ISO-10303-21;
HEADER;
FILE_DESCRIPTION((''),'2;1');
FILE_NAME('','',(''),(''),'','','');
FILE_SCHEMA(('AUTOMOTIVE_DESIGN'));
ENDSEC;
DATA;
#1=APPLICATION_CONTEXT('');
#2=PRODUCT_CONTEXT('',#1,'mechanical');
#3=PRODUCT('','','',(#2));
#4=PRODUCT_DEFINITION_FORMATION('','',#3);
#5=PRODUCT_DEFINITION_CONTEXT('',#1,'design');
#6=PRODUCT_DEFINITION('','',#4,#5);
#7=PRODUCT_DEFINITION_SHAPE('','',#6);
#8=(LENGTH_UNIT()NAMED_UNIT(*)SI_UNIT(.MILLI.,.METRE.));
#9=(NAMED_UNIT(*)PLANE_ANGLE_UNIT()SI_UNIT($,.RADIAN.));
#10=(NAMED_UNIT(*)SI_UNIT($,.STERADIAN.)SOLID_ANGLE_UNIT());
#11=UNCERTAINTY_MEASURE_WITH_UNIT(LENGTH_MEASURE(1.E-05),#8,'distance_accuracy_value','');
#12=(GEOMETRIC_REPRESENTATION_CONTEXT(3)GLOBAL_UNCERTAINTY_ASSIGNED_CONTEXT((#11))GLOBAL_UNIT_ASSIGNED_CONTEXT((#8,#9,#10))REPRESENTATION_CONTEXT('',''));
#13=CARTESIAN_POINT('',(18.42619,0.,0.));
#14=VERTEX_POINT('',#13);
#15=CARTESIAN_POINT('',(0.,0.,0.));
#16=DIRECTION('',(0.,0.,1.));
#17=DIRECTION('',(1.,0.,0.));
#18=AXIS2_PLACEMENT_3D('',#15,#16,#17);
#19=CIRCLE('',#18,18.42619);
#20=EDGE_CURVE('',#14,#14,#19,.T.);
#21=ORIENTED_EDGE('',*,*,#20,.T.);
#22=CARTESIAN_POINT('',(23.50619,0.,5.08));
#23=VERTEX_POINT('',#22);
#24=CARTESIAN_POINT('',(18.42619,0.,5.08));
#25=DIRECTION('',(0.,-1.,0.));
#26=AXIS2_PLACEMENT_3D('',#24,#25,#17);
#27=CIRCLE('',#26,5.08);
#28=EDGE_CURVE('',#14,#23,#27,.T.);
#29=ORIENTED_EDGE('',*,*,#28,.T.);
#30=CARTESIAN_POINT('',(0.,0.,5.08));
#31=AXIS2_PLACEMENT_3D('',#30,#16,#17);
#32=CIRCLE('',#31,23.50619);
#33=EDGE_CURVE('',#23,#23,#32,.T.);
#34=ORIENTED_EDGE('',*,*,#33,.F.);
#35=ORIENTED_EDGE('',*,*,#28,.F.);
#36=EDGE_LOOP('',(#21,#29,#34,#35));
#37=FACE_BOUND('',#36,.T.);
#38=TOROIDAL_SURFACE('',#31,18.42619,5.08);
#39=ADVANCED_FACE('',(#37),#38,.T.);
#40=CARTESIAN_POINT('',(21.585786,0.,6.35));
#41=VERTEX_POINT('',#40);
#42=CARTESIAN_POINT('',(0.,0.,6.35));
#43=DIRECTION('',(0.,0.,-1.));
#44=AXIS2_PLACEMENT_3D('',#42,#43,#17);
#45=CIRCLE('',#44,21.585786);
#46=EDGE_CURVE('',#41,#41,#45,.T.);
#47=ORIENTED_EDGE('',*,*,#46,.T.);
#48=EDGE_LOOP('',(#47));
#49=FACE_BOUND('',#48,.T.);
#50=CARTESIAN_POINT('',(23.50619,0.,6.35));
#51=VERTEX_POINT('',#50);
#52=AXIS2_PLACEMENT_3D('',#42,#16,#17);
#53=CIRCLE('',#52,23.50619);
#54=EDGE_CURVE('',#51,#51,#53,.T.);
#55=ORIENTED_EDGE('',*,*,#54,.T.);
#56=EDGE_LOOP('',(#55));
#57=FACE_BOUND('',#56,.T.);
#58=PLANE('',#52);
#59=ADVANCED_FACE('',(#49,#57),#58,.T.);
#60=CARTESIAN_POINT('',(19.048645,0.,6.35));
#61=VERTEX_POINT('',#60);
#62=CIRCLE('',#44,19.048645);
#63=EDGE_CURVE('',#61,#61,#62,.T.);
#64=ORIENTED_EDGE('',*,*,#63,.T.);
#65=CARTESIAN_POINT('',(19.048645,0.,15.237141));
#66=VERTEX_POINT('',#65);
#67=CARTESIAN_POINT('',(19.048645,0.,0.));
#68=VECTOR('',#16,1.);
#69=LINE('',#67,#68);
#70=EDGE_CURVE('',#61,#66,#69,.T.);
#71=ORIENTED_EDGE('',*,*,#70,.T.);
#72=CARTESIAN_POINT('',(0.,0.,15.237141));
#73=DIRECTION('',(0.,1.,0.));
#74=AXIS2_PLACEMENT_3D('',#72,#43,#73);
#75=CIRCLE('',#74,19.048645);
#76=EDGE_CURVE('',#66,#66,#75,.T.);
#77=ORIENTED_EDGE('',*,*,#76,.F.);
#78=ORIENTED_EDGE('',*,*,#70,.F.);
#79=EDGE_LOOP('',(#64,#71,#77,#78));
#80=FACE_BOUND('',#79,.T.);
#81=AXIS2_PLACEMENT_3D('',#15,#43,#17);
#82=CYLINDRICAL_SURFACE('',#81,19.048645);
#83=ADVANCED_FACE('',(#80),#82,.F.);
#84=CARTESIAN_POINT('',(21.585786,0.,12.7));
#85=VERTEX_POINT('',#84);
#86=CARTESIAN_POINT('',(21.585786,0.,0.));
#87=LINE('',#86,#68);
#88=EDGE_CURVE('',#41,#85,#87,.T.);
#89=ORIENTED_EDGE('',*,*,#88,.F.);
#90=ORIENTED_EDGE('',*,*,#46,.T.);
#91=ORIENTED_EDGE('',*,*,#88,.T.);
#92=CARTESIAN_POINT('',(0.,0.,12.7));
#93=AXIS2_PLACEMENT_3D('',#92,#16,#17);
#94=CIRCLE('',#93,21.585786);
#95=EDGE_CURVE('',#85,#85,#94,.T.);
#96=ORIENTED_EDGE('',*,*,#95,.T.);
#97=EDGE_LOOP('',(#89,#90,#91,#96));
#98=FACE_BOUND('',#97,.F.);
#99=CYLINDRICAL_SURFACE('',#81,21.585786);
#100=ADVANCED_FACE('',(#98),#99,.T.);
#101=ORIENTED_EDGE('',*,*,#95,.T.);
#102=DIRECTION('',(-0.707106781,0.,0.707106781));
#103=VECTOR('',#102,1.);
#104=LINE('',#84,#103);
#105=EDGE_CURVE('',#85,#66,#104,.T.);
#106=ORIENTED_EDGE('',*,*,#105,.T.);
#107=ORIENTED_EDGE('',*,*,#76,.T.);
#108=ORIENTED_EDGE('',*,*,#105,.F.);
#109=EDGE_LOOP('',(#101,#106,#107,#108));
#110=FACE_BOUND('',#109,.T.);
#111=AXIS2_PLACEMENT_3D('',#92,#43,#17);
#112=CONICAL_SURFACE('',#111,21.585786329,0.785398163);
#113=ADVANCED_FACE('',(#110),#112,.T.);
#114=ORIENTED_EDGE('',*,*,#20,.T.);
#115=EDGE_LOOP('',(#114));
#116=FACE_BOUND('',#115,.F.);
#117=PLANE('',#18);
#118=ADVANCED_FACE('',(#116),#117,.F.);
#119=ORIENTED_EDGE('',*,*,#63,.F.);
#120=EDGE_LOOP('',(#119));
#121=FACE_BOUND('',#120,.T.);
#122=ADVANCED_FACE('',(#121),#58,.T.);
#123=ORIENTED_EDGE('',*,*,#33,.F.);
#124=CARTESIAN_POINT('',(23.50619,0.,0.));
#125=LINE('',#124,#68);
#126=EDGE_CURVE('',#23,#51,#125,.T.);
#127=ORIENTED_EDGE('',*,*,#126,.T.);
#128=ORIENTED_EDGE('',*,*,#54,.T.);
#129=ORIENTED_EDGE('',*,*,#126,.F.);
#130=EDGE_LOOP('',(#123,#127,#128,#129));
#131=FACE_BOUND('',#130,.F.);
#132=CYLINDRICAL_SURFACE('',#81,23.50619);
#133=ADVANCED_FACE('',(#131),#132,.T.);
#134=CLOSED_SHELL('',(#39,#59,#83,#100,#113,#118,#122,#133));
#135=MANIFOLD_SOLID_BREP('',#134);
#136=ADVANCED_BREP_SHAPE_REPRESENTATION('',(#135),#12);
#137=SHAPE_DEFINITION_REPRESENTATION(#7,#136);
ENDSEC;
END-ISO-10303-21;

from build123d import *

# Parameters (mm, degrees)
F0_R     = 23.5061904225
F1_DEPTH = 6.35
F2_R     = 21.5857863289
F2_R_2   = 19.0486454652
F3_DEPTH = 15.24
F4_R     = 5.08


# Not quite as in the source:
# - a fillet or chamfer that OpenCascade refuses, or shapes differently, is made with other operations: its cross-section is extruded or revolved along the edge and cut away or added


with BuildPart() as f1:
    # F0 (on Top) → F1 (new body)
    with BuildSketch(Plane.XY):
        Circle(F0_R)
    extrude(amount=F1_DEPTH)

    # F2 (on Top) → F3 (join)
    with BuildSketch(Plane.XY):
        Circle(F2_R)
        Circle(F2_R_2, mode=Mode.SUBTRACT)
    extrude(amount=F3_DEPTH)

    # F4
    f4_edges = [f1.edges().sort_by_distance(p)[0] for p in [
        (-23.50619, 0, 0),
    ]]
    fillet(f4_edges, radius=F4_R)

    # F5: chamfer of 2.54 on 1 edges, made by hand

    # F5_s1 → F5_t2 (revolve, cut)
    with BuildSketch(Plane.XZ):
        Polygon((21.5857863289, 12.7), (19.0457863289, 15.24), (21.5857863289, 15.24), align=None)
    revolve(axis=Axis((0, 0, 15.24), (0, 0, 1)), mode=Mode.SUBTRACT)


solid = f1.part
